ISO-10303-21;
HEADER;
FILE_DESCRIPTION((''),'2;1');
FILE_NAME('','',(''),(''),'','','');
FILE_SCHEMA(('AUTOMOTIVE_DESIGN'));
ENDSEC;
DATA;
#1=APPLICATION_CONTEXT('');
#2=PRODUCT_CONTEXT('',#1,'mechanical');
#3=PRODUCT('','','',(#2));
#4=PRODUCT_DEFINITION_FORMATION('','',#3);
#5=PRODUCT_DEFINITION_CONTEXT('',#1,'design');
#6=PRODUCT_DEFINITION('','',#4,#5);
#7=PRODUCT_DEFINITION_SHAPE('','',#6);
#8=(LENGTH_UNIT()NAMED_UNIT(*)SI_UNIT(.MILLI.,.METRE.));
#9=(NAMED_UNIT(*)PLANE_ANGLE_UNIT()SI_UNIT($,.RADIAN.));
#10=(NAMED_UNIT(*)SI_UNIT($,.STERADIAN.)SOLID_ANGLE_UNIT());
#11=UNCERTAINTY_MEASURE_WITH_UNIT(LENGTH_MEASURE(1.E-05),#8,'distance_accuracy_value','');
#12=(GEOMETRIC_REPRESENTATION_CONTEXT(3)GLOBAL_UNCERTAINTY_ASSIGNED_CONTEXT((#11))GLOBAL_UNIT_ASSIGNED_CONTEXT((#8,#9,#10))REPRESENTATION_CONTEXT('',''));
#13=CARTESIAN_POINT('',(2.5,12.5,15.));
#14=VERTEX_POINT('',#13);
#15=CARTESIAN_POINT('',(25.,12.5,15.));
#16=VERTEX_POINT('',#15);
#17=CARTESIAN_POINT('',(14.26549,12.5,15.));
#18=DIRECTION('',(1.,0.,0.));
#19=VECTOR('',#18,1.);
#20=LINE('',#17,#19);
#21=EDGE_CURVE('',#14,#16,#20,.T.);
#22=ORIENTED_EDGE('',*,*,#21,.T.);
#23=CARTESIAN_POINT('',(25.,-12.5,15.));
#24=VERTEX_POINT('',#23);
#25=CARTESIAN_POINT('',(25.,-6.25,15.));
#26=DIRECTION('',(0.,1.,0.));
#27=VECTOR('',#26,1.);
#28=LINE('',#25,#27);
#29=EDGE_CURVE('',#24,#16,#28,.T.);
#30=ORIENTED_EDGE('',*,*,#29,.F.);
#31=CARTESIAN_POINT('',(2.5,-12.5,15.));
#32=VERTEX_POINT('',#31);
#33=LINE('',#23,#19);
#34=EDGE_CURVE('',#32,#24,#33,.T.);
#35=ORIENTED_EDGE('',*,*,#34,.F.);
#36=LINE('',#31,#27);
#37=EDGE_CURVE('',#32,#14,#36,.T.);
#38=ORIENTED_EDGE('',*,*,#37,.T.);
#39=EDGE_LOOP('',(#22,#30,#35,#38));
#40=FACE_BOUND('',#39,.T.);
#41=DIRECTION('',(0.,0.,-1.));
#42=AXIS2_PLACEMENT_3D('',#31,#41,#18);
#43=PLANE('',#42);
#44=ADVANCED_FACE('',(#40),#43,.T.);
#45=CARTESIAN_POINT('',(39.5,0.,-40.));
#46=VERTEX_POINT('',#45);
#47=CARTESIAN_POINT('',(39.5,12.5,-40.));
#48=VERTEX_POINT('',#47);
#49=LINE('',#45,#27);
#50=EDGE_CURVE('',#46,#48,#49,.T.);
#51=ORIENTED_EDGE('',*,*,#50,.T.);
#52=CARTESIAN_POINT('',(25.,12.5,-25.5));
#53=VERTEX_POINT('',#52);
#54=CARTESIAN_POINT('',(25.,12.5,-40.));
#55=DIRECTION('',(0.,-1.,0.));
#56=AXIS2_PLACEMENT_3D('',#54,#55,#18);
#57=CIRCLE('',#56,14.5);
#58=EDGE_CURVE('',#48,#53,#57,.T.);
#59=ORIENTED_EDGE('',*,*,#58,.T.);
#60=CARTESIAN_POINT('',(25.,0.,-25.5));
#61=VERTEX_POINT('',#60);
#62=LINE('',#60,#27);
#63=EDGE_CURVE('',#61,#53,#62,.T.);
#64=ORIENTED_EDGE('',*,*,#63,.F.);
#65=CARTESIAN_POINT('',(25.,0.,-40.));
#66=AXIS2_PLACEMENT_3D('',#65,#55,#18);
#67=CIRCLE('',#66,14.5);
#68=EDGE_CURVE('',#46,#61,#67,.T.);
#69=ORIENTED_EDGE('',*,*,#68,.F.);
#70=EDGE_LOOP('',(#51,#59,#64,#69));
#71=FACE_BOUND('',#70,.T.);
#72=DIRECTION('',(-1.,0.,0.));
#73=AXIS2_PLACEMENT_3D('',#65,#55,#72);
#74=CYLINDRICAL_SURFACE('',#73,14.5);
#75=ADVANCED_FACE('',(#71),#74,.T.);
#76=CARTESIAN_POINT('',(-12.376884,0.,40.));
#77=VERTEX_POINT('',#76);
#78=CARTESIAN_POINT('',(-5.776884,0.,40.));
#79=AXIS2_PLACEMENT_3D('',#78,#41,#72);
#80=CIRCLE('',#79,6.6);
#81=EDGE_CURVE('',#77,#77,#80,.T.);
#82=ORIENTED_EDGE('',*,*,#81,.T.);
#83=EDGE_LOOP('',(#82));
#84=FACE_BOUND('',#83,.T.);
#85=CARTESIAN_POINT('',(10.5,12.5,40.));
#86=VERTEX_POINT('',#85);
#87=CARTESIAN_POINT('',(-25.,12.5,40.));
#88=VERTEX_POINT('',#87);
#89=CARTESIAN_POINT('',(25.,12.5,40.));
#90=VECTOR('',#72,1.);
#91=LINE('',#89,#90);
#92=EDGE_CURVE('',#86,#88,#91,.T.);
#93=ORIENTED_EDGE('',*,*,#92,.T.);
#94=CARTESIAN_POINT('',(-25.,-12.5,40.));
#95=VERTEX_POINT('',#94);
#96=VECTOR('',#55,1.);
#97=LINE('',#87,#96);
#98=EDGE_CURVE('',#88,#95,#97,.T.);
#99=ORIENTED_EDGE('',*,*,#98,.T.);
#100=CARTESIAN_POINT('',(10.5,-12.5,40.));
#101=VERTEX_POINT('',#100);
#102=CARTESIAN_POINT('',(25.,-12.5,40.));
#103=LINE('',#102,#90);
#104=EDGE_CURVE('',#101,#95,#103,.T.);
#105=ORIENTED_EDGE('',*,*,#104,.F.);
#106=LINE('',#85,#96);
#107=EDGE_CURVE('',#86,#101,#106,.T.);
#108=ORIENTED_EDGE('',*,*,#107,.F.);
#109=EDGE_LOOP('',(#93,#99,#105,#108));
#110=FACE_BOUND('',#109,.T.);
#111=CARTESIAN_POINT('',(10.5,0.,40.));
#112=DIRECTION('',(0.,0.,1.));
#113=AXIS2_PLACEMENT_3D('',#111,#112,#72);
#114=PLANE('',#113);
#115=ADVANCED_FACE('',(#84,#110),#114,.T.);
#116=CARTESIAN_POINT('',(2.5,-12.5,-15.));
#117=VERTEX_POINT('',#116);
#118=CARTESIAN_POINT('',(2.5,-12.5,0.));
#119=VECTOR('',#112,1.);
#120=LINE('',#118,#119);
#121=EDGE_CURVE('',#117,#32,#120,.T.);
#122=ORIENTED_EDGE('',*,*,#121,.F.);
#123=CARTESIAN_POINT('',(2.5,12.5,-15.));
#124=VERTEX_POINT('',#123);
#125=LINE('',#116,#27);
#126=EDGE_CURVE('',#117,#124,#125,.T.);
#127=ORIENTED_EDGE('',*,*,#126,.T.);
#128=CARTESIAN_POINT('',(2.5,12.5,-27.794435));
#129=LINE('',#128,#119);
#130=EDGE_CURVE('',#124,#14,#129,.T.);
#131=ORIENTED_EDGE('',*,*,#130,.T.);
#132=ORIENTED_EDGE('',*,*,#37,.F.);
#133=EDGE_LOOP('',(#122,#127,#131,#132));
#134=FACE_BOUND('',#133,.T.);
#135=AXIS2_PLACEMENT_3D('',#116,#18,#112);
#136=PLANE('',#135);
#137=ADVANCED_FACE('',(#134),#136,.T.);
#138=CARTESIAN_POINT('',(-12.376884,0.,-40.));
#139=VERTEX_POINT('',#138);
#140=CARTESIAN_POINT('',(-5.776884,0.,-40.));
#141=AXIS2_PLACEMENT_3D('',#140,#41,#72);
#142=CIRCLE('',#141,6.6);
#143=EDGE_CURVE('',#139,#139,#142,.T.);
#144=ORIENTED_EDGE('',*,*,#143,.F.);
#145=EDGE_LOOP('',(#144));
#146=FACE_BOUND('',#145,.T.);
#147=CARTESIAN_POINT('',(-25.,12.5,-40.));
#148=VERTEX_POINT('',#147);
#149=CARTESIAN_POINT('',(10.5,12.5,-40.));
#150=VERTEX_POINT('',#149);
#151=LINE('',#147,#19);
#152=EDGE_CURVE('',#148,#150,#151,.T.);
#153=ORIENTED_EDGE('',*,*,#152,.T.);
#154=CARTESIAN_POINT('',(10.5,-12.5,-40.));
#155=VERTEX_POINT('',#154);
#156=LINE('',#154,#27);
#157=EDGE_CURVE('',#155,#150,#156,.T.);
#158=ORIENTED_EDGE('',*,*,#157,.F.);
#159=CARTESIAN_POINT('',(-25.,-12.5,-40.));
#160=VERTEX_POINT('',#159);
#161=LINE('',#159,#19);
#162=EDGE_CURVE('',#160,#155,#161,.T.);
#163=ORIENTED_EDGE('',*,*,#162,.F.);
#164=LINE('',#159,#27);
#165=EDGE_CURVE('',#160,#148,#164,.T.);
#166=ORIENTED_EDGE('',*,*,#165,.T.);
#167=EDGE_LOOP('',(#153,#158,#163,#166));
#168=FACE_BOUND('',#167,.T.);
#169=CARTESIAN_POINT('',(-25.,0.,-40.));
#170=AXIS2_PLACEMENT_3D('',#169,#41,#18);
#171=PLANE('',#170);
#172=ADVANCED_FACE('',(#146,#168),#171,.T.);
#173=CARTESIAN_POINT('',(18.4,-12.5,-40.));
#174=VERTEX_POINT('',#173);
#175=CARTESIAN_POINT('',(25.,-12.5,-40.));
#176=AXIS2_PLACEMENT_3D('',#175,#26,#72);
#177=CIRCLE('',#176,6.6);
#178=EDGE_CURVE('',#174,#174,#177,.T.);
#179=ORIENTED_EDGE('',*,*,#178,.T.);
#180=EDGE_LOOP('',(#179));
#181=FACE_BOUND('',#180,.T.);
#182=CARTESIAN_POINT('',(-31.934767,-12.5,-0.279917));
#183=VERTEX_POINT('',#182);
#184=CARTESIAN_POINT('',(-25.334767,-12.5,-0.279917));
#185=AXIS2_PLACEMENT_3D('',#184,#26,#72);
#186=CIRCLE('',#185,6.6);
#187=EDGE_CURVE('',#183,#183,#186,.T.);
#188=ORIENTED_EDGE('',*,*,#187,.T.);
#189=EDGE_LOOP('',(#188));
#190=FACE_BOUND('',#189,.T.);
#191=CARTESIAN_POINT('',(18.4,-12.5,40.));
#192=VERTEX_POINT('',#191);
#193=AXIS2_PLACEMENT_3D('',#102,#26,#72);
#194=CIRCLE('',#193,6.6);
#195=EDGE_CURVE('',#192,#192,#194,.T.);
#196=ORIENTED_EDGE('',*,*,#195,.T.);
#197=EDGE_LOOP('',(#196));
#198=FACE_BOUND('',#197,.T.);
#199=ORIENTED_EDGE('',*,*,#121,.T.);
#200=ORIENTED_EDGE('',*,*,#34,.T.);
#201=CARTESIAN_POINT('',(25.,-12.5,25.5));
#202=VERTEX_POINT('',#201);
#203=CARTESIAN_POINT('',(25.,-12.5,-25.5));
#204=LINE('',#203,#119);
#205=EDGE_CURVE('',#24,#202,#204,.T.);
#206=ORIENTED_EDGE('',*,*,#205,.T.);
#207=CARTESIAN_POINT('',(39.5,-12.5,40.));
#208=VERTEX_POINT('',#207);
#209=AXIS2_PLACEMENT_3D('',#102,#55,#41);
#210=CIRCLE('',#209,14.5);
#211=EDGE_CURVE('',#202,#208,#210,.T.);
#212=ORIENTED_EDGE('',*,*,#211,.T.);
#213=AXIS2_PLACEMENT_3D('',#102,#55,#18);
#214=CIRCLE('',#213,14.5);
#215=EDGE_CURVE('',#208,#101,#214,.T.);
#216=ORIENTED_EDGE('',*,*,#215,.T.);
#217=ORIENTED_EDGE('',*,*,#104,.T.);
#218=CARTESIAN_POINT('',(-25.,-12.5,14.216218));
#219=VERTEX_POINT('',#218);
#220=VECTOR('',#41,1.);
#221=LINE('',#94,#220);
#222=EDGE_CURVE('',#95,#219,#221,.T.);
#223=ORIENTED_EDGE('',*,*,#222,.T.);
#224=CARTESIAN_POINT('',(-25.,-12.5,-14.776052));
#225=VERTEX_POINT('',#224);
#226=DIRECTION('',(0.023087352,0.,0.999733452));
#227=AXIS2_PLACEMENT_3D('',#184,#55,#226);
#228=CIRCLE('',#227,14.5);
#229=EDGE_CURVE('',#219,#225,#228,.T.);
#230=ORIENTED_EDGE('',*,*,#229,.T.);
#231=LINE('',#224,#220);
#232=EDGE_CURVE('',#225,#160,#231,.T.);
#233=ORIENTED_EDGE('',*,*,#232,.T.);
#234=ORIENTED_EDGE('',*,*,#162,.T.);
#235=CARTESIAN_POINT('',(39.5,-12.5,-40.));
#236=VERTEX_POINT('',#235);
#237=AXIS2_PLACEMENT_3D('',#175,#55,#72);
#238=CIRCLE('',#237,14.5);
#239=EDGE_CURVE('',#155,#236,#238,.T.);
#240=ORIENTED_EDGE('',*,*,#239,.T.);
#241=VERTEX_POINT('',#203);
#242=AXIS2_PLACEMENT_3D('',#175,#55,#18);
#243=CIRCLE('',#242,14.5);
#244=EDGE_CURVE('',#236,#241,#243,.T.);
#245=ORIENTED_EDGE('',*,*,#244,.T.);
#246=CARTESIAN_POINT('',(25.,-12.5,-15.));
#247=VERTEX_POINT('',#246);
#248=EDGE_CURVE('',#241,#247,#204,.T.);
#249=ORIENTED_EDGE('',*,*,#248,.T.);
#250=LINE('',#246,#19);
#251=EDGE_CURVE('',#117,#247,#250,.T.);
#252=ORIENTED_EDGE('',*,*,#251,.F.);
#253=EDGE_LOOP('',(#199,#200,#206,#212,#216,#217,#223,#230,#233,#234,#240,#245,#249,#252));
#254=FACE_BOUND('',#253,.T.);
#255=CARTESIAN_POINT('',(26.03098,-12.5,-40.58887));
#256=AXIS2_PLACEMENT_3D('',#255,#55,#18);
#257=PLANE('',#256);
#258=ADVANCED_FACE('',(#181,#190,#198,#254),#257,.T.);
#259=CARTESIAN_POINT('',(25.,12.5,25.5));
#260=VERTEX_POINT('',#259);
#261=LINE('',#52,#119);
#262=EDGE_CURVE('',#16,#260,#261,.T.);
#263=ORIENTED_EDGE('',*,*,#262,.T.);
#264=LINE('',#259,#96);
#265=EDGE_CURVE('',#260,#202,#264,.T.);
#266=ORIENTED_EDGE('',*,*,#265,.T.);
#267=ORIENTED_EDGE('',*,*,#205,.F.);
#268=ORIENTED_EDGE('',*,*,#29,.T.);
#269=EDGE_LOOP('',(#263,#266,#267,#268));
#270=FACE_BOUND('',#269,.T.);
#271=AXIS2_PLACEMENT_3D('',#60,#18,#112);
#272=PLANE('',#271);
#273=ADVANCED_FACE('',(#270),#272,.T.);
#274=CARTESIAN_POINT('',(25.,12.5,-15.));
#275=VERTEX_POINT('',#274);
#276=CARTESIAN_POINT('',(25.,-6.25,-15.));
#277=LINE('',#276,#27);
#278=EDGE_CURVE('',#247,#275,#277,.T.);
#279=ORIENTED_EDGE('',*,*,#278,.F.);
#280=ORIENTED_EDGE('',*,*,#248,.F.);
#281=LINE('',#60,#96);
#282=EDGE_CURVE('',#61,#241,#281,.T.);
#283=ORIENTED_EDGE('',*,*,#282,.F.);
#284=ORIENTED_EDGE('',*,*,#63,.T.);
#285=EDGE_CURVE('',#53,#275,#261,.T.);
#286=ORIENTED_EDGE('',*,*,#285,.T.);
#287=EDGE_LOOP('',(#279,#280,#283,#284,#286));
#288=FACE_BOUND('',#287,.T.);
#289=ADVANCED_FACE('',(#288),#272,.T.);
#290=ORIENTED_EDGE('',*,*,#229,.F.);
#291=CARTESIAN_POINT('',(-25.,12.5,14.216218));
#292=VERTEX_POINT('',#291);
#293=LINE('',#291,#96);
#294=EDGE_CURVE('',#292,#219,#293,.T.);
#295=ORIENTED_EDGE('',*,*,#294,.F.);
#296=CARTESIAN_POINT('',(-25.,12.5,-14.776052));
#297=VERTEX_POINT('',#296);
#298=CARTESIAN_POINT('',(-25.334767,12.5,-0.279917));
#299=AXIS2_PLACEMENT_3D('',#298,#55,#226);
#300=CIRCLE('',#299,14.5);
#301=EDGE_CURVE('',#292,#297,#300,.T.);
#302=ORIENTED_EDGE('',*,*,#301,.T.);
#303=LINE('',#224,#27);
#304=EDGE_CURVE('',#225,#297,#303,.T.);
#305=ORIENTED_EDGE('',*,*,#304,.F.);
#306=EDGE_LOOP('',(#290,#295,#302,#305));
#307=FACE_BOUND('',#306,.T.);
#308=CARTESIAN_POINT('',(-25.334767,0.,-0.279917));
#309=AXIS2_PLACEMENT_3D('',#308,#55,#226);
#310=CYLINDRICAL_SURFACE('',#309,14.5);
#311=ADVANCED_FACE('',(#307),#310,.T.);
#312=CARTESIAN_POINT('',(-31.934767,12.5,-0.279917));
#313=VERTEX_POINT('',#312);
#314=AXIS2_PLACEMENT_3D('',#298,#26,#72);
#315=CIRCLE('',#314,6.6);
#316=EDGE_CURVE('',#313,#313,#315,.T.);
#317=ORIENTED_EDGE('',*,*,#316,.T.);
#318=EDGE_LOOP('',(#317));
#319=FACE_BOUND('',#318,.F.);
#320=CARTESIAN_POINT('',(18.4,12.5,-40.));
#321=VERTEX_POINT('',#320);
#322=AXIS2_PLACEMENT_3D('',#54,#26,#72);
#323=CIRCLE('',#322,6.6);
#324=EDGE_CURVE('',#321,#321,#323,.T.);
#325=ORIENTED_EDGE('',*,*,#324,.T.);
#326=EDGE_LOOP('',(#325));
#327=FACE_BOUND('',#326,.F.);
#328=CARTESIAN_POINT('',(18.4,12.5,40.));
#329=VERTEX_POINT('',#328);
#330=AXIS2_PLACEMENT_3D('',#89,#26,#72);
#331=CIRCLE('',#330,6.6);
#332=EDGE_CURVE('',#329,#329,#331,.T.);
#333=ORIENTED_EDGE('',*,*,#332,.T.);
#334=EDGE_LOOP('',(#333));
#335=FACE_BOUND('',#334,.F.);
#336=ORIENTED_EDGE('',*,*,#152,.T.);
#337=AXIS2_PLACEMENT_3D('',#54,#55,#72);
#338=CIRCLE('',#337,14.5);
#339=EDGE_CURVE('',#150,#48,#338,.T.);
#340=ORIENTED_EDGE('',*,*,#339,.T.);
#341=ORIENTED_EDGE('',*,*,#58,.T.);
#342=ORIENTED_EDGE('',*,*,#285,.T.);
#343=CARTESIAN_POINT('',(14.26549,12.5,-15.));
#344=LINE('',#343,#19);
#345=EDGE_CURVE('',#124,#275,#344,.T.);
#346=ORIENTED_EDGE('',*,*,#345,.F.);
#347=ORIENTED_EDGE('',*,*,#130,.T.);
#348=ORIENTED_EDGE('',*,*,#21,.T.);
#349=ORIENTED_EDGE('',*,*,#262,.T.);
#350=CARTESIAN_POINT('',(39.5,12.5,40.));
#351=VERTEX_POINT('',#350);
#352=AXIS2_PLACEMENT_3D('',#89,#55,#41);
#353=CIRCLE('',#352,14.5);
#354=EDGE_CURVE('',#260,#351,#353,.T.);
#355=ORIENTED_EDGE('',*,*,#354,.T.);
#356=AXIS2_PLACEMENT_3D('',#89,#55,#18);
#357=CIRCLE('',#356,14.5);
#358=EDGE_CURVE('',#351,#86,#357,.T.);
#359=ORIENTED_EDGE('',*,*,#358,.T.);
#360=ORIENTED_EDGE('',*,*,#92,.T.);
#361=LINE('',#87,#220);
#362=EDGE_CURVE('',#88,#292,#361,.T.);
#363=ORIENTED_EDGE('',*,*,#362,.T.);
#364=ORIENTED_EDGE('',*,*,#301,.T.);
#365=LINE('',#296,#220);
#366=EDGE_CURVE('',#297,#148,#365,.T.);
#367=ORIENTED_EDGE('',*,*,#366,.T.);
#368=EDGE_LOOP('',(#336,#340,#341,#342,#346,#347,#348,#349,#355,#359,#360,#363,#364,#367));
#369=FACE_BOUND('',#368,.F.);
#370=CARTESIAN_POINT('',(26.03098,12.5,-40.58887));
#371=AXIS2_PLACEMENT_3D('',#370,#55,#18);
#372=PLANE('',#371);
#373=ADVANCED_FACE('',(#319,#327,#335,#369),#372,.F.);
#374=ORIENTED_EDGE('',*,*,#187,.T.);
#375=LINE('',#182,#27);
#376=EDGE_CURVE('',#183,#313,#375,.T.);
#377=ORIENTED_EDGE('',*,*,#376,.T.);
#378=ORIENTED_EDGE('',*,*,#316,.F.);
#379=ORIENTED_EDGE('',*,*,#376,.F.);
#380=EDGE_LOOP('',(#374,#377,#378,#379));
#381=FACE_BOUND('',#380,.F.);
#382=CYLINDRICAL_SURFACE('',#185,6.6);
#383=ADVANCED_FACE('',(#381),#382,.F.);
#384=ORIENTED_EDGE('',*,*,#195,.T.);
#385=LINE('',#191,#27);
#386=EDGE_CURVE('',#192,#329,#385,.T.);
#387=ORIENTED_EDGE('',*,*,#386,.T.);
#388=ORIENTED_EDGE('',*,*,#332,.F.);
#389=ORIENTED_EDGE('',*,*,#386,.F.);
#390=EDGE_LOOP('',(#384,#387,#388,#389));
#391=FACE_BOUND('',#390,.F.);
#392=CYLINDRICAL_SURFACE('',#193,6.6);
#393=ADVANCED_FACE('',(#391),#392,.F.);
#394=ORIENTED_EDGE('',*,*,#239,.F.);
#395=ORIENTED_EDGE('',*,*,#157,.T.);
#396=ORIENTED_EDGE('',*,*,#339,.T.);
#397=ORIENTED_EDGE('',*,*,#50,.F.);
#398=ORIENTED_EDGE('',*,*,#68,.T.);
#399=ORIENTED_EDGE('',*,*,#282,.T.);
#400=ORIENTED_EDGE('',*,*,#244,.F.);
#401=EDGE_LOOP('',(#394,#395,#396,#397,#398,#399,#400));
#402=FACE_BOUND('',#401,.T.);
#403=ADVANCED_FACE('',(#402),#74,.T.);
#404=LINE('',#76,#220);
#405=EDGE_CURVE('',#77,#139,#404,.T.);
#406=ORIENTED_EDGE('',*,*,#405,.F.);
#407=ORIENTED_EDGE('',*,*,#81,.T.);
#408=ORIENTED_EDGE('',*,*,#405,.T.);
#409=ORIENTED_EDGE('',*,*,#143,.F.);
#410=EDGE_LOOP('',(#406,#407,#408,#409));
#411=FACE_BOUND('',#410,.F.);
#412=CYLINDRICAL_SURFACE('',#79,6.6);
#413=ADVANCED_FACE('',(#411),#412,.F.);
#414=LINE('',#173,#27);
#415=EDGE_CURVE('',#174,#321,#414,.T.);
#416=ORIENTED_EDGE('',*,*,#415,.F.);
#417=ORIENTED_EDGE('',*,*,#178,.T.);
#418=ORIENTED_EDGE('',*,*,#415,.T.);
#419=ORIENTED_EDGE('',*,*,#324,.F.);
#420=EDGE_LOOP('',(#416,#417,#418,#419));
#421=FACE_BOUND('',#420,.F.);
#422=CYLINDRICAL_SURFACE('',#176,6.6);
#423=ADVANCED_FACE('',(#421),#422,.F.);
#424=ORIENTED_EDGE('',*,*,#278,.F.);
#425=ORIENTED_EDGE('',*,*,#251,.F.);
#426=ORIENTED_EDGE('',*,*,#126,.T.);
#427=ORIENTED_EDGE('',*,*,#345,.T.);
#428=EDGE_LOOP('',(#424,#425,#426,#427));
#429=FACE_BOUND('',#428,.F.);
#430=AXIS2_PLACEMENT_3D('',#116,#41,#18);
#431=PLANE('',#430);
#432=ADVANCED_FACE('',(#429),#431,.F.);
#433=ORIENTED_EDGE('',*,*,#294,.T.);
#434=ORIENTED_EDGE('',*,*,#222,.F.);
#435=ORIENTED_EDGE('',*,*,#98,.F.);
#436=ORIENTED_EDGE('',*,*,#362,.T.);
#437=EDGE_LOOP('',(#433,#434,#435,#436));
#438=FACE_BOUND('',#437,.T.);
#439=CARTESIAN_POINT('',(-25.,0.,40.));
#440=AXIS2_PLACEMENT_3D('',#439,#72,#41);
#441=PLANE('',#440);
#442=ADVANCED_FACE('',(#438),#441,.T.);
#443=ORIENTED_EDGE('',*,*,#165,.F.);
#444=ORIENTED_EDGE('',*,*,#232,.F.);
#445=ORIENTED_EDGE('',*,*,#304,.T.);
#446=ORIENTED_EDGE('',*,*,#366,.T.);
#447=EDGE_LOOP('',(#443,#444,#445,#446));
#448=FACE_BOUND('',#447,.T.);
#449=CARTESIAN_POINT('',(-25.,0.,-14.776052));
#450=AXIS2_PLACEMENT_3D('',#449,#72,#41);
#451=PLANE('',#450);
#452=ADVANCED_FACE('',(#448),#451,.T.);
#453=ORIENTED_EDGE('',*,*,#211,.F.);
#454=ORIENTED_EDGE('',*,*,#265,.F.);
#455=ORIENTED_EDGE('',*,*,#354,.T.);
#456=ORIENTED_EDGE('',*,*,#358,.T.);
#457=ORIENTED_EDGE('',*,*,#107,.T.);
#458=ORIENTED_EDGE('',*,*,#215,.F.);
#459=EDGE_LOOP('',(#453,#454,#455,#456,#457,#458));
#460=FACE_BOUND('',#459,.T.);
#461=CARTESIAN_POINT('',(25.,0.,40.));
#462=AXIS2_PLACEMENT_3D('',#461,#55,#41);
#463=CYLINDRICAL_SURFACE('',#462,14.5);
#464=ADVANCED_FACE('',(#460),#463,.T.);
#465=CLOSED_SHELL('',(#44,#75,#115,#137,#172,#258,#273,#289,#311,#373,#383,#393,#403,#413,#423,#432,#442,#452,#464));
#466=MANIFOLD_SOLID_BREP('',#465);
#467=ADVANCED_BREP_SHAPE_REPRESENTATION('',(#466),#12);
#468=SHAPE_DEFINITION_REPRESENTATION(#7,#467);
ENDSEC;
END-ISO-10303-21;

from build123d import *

# Parameters (mm, degrees)
F1_DEPTH       = 12.5
F3_D           = 13.2
F3_CBORE_D     = 19.25
F3_CBORE_DEPTH = 0
F5_D           = 13.2
F5_CBORE_D     = 19.25
F5_CBORE_DEPTH = 0
F6_W           = 45
F6_H           = 30
F7_DEPTH       = 30


with BuildPart() as f1:
    # F0 (on Front) → F1 (new body, symmetric)
    with BuildSketch(Plane.XZ):
        with BuildLine():
            Line((25, -25.5), (25, -40))
            Line((25, -40), (10.5, -40))
            ThreePointArc((10.5, -40), (25, -54.5), (39.5, -40))
            ThreePointArc((39.5, -40), (35.2530483272, -29.7469516728), (25, -25.5))
        make_face()
        with BuildLine():
            Line((10.5, -40), (25, -40))
            Line((25, -40), (25, -25.5))
            ThreePointArc((25, -25.5), (14.7469516728, -29.7469516728), (10.5, -40))
        make_face()
        with BuildLine():
            Line((-25, -40), (10.5, -40))
            ThreePointArc((10.5, -40), (14.7469516728, -29.7469516728), (25, -25.5))
            Line((25, -25.5), (25, 25.5))
            ThreePointArc((25, 25.5), (14.7469516728, 29.7469516728), (10.5, 40))
            Line((10.5, 40), (-25, 40))
            Line((-25, 40), (-25, 14.2162181315))
            ThreePointArc((-25, 14.2162181315), (-14.9640357801, 9.8540823977), (-10.8347666082, -0.279916916))
            ThreePointArc((-10.8347666082, -0.279916916), (-14.9640357801, -10.4139162298), (-25, -14.7760519636))
            Line((-25, -14.7760519636), (-25, -40))
        make_face()
        with BuildLine():
            ThreePointArc((10.5, 40), (14.7469516728, 29.7469516728), (25, 25.5))
            Line((25, 25.5), (25, 40))
            Line((25, 40), (10.5, 40))
        make_face()
        with BuildLine():
            Line((25, 40), (25, 25.5))
            ThreePointArc((25, 25.5), (35.2530483272, 29.7469516728), (39.5, 40))
            ThreePointArc((39.5, 40), (25, 54.5), (10.5, 40))
            Line((10.5, 40), (25, 40))
        make_face()
        with BuildLine():
            ThreePointArc((-25, 14.2162181315), (-39.8347666082, -0.279916916), (-25, -14.7760519636))
            Line((-25, -14.7760519636), (-25, 14.2162181315))
        make_face()
        with BuildLine():
            Line((-25, 14.2162181315), (-25, -14.7760519636))
            ThreePointArc((-25, -14.7760519636), (-14.9640357801, -10.4139162298), (-10.8347666082, -0.279916916))
            ThreePointArc((-10.8347666082, -0.279916916), (-14.9640357801, 9.8540823977), (-25, 14.2162181315))
        make_face()
    extrude(amount=F1_DEPTH, both=True)

    # F3 (through all)
    with Locations(Plane.XZ.offset(12.5)):
        with Locations((25, 40), (-25.3347666082, -0.279916916), (25, -40)):
            CounterBoreHole(F3_D / 2, F3_CBORE_D / 2, F3_CBORE_DEPTH)

    # F5 (through all)
    with Locations(Plane.XY.offset(40)):
        with Locations((-5.7768835686, 0)):
            CounterBoreHole(F5_D / 2, F5_CBORE_D / 2, F5_CBORE_DEPTH)

    # F6 (on face) → F7 (cut)
    with BuildSketch(Plane.XZ.offset(12.5)):
        with Locations((25, 0)):
            Rectangle(F6_W, F6_H)
    extrude(amount=-F7_DEPTH, mode=Mode.SUBTRACT)


solid = f1.part
